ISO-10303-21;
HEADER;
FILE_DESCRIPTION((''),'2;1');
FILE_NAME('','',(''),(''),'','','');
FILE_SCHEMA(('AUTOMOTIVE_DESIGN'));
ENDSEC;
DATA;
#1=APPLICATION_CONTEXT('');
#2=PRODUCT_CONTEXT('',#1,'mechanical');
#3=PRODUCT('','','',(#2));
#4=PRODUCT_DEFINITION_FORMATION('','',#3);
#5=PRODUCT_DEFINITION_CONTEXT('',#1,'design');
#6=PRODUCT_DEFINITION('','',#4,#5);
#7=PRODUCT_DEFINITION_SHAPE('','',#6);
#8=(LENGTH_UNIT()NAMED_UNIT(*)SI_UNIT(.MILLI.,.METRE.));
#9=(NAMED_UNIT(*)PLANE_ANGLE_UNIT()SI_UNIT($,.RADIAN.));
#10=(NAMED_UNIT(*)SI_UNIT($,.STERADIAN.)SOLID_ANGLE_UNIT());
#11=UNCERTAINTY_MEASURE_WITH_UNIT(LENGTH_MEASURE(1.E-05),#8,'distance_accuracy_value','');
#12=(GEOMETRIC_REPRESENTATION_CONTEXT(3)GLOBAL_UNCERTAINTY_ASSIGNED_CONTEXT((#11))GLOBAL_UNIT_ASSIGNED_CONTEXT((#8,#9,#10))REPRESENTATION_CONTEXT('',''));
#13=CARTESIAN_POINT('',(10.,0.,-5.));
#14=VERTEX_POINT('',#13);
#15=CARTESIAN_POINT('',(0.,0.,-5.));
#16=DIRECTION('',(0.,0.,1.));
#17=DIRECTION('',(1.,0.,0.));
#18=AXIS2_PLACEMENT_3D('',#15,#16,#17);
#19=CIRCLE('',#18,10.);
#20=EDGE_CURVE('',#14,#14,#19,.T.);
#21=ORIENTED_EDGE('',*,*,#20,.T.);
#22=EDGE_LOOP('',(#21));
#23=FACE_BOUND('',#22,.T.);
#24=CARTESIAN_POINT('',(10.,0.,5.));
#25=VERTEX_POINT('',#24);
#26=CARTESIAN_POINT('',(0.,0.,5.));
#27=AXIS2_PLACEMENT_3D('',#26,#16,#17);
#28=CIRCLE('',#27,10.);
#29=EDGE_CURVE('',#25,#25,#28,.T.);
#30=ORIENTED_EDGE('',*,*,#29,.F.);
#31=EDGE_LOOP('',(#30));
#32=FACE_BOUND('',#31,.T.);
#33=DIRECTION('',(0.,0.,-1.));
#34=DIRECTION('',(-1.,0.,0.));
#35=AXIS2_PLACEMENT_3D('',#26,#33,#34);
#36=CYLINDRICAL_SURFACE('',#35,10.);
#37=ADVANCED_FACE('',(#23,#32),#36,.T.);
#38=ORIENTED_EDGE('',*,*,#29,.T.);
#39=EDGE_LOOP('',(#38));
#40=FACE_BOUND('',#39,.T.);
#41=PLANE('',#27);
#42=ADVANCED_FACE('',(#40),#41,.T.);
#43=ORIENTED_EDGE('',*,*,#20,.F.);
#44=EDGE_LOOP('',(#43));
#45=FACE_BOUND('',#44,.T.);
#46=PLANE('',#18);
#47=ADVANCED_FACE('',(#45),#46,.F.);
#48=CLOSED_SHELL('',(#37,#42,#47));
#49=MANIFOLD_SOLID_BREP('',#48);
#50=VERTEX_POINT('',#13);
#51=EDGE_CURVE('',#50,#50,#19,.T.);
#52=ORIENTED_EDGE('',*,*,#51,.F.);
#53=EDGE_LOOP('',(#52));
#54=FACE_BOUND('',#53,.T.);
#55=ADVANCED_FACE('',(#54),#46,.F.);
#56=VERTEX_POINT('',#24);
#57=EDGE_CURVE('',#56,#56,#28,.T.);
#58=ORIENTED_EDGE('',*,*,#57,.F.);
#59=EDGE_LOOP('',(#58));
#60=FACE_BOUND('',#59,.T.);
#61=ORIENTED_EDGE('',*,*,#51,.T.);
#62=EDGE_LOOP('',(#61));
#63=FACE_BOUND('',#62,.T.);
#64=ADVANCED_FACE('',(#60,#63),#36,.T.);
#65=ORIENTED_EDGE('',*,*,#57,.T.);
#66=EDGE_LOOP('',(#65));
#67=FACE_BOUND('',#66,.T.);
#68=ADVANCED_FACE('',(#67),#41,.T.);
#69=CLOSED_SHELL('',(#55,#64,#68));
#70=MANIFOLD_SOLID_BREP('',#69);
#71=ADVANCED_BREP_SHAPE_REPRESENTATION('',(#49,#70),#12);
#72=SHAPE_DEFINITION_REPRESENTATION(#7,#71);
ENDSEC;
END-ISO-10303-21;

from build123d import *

# Parameters (mm, degrees)
SKETCH1_R                 = 10
BOSS_EXTRUDE1_DEPTH       = 5
BODY_MOVE_COPY1_START     = -5
BODY_MOVE_COPY1_OUTLINE_R = 10
BODY_MOVE_COPY1_DEPTH     = 10


# Read off the part's stored shape, not the designer's step: Body-Move/Copy1
with BuildPart() as part:
    # Sketch1 → Boss-Extrude1 (new, symmetric)
    with BuildSketch(Plane.XY):
        Circle(SKETCH1_R)
    extrude(amount=BOSS_EXTRUDE1_DEPTH, both=True)


with BuildPart() as body_2:
    # Body-Move/Copy1 outline → Body-Move/Copy1 (new body)
    with BuildSketch(Plane.XY.offset(BODY_MOVE_COPY1_START)):
        Circle(BODY_MOVE_COPY1_OUTLINE_R)
    extrude(amount=BODY_MOVE_COPY1_DEPTH)


solid = Compound([part.part, body_2.part])
